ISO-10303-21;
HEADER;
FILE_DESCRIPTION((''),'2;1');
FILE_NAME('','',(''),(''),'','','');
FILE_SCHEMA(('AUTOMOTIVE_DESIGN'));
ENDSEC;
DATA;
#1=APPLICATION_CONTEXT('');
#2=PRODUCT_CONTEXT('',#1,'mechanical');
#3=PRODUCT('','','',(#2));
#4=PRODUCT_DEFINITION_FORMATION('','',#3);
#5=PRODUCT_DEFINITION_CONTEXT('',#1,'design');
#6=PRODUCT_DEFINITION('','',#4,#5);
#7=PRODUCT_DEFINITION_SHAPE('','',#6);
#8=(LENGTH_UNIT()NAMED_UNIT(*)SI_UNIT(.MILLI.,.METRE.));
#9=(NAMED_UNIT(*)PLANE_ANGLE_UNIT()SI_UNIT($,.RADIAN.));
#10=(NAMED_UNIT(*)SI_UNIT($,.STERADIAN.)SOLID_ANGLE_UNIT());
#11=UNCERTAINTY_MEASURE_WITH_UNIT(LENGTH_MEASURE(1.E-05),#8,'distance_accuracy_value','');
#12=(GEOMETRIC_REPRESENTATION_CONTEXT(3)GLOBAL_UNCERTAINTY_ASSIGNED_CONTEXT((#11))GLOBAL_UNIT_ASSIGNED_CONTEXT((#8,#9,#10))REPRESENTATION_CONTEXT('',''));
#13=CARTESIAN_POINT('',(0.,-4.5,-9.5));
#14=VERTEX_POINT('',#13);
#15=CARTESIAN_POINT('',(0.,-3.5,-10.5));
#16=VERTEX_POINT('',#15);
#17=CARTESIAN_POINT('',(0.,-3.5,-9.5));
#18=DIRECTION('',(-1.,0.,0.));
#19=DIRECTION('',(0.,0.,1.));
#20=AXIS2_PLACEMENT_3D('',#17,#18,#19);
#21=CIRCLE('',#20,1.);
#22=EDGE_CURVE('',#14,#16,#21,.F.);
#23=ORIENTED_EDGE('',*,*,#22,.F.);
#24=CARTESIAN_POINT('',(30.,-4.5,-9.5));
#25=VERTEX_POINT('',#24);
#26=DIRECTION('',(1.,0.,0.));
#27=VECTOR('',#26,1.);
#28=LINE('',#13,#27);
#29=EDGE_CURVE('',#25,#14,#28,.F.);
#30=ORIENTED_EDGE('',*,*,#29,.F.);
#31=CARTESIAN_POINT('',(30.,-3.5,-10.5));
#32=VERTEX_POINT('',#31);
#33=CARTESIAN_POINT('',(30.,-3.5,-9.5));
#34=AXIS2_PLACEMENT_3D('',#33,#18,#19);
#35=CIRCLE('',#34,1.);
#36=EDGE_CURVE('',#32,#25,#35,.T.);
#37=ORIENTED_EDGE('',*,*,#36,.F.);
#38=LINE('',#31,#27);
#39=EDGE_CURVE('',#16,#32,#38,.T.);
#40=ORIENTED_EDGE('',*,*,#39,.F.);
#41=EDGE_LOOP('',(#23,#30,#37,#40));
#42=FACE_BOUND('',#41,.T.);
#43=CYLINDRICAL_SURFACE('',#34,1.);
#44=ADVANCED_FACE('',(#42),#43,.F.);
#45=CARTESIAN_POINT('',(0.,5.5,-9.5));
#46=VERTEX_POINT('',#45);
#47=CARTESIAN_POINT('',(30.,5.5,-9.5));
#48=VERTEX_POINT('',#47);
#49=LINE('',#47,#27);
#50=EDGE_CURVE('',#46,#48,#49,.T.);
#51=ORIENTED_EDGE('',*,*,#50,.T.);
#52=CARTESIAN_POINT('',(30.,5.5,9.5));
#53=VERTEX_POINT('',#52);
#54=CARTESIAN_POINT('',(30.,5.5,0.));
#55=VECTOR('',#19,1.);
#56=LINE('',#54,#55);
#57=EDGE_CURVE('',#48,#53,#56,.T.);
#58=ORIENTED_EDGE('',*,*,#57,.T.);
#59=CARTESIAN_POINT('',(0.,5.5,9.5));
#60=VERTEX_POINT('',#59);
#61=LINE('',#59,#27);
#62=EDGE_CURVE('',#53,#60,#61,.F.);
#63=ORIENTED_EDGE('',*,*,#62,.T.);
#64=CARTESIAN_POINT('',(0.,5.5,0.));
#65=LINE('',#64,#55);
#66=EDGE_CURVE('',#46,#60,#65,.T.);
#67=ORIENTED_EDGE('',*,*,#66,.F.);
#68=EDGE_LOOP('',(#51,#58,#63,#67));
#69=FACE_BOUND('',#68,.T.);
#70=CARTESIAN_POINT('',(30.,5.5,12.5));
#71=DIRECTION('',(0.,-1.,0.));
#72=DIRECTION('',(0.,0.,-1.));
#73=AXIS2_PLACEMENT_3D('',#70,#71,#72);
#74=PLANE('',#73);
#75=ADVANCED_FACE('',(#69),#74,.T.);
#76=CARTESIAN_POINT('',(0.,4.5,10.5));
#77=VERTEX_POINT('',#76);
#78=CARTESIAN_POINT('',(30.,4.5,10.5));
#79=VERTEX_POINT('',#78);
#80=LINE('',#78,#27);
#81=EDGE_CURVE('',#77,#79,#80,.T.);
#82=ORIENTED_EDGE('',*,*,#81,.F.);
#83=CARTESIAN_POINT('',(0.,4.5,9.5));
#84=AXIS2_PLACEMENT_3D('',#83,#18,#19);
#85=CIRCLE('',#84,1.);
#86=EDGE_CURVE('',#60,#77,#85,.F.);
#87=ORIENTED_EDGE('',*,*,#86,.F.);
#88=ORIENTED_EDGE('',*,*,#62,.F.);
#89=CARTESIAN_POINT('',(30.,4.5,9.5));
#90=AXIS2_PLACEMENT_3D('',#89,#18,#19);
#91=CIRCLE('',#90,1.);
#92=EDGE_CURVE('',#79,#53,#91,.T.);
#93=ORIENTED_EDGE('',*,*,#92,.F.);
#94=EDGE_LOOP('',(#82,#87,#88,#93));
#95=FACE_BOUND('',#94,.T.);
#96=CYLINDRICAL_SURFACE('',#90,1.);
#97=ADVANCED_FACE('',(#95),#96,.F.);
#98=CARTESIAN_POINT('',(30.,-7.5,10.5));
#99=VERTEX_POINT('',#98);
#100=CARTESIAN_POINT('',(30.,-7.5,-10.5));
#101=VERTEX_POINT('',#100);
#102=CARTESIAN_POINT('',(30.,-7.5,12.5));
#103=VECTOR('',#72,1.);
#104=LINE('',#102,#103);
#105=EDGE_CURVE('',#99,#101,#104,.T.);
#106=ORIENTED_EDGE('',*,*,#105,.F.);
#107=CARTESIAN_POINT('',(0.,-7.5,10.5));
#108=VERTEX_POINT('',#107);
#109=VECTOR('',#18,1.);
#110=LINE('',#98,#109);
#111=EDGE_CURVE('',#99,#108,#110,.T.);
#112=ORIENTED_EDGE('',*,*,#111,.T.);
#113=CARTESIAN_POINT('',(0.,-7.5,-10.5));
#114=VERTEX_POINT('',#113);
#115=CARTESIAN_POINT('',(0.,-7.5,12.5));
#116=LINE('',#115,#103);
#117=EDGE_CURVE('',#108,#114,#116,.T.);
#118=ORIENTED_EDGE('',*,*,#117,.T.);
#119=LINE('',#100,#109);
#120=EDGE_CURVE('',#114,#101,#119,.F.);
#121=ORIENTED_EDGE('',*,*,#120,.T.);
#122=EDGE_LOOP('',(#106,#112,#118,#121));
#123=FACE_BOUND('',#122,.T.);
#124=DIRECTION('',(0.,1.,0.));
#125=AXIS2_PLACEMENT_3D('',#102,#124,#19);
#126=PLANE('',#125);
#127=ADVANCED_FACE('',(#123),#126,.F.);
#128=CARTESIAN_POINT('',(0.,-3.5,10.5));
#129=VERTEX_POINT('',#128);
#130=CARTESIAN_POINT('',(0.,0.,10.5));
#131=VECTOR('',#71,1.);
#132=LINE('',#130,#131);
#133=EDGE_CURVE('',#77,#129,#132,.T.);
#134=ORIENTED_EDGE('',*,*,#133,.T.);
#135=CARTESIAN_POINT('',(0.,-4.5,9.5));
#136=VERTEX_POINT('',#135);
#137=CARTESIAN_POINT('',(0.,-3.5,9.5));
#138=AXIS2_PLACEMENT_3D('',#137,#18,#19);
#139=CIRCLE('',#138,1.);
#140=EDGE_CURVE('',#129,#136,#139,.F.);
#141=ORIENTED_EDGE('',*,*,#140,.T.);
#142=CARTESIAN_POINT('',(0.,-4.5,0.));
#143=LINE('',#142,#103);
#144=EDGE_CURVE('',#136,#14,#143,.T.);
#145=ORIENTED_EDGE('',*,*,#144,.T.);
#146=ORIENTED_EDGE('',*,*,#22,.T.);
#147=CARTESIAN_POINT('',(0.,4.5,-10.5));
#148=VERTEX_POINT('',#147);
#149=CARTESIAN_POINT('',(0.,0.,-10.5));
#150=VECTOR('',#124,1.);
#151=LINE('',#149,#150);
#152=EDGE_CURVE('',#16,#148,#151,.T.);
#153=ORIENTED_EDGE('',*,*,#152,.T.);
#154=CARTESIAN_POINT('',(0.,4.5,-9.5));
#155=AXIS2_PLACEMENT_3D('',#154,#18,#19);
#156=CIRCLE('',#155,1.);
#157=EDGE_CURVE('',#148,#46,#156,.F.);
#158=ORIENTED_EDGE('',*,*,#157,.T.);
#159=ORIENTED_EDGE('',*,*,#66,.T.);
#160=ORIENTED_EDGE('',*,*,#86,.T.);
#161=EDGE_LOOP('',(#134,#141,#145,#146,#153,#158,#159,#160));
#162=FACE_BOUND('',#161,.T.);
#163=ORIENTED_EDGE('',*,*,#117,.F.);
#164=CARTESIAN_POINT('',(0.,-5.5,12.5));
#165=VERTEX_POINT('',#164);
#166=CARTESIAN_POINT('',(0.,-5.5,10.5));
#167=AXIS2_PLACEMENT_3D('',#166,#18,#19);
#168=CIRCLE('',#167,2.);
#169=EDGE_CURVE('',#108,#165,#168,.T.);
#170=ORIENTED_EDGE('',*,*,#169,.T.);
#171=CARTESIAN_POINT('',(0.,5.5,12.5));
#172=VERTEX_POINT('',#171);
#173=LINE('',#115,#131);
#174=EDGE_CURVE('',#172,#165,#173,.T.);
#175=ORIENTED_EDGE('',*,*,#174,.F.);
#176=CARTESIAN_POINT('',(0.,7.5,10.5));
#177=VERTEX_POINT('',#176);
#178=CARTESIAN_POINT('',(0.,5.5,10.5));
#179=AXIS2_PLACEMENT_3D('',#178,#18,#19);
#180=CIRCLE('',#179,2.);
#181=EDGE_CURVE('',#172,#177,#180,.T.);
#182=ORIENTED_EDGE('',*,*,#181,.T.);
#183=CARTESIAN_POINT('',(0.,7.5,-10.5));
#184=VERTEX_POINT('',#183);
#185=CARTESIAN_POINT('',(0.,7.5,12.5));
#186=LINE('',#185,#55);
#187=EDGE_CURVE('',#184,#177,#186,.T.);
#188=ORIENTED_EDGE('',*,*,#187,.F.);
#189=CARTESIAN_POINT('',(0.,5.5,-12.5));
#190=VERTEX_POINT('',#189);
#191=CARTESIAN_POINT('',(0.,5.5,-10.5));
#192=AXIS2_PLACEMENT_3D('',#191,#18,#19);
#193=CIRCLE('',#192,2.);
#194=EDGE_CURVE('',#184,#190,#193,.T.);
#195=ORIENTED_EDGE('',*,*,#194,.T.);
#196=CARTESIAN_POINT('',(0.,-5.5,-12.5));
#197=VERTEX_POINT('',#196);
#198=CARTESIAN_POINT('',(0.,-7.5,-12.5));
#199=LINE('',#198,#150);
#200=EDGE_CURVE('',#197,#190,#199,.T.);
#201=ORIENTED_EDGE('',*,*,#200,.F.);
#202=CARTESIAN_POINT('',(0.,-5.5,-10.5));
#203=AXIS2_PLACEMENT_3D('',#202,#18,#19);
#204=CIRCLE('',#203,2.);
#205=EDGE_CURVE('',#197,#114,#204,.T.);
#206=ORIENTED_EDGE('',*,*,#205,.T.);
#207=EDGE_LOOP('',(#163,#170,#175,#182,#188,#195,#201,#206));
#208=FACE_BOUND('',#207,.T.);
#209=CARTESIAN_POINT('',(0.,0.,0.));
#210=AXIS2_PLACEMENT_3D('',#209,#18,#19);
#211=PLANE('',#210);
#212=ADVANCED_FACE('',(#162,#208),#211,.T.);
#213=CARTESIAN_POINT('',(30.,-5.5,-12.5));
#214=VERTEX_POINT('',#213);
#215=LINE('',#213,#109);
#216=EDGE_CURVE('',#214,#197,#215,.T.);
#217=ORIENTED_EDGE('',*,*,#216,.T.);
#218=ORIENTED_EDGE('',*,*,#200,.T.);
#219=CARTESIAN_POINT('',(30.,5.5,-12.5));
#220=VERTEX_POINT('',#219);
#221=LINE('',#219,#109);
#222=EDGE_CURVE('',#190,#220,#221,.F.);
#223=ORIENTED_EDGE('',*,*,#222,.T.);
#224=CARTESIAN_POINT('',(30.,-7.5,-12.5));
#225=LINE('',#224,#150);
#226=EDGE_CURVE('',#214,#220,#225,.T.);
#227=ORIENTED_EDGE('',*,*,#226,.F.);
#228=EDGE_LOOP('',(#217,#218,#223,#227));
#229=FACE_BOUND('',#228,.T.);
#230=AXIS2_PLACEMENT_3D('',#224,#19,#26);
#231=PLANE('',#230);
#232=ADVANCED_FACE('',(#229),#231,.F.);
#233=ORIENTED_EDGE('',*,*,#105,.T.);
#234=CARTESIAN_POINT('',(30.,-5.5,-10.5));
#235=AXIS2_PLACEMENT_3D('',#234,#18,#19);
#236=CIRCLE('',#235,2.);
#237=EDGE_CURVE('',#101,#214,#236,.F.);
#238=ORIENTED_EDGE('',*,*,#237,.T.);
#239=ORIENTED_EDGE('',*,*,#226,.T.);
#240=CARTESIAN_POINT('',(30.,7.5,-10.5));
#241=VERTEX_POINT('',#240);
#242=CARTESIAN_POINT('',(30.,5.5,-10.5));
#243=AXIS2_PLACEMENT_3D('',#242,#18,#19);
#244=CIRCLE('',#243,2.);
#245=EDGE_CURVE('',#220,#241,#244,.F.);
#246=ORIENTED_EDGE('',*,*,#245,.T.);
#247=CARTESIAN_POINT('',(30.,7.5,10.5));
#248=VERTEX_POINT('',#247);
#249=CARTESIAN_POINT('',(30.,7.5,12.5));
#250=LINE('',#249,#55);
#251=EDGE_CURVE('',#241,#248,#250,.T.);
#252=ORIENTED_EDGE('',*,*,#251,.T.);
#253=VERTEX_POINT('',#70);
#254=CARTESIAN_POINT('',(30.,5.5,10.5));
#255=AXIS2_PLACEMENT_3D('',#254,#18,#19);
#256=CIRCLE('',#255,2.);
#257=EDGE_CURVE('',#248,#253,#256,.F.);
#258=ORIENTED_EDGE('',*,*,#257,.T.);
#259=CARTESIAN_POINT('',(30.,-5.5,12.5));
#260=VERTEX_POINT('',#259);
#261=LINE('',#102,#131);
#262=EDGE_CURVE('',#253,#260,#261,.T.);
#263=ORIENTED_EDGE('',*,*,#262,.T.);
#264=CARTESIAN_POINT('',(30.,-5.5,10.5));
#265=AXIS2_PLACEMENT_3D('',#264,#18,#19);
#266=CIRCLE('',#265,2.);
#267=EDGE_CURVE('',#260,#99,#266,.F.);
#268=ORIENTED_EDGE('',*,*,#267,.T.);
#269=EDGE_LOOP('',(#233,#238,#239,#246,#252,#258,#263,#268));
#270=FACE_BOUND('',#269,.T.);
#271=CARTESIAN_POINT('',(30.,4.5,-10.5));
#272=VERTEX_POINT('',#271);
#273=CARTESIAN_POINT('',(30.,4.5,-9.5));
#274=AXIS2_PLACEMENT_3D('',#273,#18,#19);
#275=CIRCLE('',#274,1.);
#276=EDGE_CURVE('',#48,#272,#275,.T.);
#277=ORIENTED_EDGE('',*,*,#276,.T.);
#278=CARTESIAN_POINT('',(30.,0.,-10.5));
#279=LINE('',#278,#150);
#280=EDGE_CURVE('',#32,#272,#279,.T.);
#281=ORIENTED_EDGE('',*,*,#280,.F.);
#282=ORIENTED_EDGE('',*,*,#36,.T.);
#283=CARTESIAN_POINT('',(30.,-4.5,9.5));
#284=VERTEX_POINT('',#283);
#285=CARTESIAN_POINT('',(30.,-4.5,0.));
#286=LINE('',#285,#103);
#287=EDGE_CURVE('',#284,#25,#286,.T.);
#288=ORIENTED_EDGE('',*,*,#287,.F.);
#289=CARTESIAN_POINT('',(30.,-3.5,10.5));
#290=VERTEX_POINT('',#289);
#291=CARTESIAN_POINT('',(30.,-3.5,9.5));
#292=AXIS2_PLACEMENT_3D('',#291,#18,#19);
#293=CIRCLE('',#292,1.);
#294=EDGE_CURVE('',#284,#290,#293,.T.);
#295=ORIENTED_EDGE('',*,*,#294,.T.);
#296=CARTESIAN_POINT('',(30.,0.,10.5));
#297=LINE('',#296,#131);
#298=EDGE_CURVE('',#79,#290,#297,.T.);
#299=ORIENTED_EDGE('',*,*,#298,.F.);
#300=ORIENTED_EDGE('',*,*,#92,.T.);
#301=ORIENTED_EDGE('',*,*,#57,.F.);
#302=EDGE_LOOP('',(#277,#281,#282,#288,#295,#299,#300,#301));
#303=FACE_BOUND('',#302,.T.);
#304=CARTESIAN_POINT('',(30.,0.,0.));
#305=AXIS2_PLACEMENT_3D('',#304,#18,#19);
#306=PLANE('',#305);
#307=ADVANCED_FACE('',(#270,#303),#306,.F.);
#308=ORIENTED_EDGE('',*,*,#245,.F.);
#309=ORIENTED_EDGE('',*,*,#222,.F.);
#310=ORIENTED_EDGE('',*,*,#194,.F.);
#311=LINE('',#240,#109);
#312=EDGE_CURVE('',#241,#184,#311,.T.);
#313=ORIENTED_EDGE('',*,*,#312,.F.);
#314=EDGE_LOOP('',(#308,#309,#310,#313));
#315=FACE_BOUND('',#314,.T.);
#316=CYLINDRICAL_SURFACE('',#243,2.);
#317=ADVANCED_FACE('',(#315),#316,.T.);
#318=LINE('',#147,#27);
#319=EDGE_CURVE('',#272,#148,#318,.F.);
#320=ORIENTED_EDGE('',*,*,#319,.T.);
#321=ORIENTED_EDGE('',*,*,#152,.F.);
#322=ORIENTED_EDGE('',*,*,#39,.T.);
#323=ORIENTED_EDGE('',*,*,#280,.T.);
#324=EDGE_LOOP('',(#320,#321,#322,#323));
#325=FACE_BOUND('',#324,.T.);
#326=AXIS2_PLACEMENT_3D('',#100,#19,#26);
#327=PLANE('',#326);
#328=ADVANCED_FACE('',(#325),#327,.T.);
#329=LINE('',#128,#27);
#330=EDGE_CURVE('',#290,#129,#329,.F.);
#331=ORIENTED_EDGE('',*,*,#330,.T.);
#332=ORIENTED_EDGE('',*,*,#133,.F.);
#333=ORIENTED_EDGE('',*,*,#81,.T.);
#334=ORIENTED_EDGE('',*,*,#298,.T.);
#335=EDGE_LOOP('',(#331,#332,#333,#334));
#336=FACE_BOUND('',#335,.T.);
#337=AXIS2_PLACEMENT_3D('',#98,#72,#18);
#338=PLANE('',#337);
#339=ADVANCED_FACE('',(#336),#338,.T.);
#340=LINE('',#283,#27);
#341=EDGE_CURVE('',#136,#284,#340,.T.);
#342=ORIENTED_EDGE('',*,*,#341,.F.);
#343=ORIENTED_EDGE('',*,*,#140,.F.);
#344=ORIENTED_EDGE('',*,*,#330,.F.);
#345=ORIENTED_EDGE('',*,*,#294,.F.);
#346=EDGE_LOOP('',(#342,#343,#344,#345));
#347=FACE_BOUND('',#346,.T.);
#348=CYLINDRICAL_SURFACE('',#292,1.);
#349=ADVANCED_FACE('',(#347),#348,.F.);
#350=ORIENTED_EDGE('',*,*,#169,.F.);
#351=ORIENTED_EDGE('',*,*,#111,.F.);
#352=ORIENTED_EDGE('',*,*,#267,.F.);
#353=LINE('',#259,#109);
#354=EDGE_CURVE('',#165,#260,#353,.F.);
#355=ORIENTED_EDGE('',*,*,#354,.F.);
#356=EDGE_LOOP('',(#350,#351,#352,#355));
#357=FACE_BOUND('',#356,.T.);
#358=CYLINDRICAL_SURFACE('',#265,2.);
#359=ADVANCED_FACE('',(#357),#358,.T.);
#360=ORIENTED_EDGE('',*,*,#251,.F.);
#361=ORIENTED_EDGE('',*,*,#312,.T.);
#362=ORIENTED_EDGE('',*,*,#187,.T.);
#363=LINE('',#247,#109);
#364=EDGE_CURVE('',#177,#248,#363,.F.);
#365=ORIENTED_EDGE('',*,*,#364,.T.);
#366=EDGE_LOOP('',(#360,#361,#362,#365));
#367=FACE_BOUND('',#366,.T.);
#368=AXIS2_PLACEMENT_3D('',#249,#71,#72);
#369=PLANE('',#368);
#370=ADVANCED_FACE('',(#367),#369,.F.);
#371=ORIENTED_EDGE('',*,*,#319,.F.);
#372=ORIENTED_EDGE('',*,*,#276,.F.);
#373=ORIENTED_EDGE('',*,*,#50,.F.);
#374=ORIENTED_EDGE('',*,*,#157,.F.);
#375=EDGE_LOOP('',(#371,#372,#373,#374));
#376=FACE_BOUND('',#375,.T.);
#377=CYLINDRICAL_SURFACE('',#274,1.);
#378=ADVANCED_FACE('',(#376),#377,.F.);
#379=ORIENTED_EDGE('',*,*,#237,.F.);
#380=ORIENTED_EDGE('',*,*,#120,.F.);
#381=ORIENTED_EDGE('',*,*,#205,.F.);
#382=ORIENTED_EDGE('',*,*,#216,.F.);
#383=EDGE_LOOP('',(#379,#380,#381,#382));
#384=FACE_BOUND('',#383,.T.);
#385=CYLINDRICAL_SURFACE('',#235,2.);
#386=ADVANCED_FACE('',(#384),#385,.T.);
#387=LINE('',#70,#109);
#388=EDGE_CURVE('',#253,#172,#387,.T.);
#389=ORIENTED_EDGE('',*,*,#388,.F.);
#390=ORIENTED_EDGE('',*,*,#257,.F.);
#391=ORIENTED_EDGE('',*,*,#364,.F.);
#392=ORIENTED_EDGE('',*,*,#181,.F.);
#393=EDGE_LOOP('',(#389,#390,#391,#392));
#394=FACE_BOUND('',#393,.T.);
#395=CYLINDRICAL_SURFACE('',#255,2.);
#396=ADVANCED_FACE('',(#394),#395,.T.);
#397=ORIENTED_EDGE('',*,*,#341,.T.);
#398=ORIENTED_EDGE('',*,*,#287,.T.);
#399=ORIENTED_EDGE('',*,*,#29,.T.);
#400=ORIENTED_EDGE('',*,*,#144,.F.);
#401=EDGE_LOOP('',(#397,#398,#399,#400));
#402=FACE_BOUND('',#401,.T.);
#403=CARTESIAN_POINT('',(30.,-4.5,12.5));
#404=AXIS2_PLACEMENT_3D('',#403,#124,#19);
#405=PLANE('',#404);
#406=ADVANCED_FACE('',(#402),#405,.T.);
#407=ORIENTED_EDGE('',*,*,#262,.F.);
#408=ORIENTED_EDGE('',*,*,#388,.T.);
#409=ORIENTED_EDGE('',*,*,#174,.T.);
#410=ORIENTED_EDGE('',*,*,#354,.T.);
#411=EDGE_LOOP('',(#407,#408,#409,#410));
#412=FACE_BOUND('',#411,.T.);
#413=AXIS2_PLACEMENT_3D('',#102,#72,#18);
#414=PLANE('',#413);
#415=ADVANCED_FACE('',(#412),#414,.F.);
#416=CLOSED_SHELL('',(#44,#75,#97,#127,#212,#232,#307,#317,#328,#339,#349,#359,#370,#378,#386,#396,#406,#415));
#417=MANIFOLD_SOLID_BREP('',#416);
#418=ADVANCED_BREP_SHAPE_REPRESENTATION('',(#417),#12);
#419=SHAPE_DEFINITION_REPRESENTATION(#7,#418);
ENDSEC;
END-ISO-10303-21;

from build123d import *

# Parameters (mm, degrees)
SKETCH1_W           = 25
SKETCH1_H           = 15
BOSS_EXTRUDE1_DEPTH = 30
FILLET1_R           = 2
SHELL1_START        = -10.5
SHELL1_OUTLINE_W    = 30
SHELL1_OUTLINE_H    = 10
SHELL1_DEPTH        = 21
FILLET3_R           = 1


# Read off the part's stored shape, not the designer's step: Shell1
with BuildPart() as part:
    # Sketch1 → Boss-Extrude1 (new body)
    with BuildSketch(Plane(origin=(0, 0, 0), x_dir=(0, 0, -1), z_dir=(1, 0, 0))):
        Rectangle(SKETCH1_W, SKETCH1_H)
    extrude(amount=BOSS_EXTRUDE1_DEPTH)

    # Fillet1
    fillet1_edges = [part.edges().sort_by_distance(p)[0] for p in [
        (15, -7.5, -12.5),
        (15, -7.5, 12.5),
        (15, 7.5, 12.5),
        (15, 7.5, -12.5),
    ]]
    fillet(fillet1_edges, radius=FILLET1_R)

    # Shell1 outline → Shell1 (cut)
    with BuildSketch(Plane.XY.offset(SHELL1_START)):
        with Locations((15, 0.5)):
            Rectangle(SHELL1_OUTLINE_W, SHELL1_OUTLINE_H)
    extrude(amount=SHELL1_DEPTH, mode=Mode.SUBTRACT)

    # Fillet3
    fillet3_edges = [part.edges().sort_by_distance(p)[0] for p in [
        (15, 5.5, -10.5),
        (15, 5.5, 10.5),
        (15, -4.5, 10.5),
        (15, -4.5, -10.5),
    ]]
    fillet(fillet3_edges, radius=FILLET3_R)


solid = part.part
